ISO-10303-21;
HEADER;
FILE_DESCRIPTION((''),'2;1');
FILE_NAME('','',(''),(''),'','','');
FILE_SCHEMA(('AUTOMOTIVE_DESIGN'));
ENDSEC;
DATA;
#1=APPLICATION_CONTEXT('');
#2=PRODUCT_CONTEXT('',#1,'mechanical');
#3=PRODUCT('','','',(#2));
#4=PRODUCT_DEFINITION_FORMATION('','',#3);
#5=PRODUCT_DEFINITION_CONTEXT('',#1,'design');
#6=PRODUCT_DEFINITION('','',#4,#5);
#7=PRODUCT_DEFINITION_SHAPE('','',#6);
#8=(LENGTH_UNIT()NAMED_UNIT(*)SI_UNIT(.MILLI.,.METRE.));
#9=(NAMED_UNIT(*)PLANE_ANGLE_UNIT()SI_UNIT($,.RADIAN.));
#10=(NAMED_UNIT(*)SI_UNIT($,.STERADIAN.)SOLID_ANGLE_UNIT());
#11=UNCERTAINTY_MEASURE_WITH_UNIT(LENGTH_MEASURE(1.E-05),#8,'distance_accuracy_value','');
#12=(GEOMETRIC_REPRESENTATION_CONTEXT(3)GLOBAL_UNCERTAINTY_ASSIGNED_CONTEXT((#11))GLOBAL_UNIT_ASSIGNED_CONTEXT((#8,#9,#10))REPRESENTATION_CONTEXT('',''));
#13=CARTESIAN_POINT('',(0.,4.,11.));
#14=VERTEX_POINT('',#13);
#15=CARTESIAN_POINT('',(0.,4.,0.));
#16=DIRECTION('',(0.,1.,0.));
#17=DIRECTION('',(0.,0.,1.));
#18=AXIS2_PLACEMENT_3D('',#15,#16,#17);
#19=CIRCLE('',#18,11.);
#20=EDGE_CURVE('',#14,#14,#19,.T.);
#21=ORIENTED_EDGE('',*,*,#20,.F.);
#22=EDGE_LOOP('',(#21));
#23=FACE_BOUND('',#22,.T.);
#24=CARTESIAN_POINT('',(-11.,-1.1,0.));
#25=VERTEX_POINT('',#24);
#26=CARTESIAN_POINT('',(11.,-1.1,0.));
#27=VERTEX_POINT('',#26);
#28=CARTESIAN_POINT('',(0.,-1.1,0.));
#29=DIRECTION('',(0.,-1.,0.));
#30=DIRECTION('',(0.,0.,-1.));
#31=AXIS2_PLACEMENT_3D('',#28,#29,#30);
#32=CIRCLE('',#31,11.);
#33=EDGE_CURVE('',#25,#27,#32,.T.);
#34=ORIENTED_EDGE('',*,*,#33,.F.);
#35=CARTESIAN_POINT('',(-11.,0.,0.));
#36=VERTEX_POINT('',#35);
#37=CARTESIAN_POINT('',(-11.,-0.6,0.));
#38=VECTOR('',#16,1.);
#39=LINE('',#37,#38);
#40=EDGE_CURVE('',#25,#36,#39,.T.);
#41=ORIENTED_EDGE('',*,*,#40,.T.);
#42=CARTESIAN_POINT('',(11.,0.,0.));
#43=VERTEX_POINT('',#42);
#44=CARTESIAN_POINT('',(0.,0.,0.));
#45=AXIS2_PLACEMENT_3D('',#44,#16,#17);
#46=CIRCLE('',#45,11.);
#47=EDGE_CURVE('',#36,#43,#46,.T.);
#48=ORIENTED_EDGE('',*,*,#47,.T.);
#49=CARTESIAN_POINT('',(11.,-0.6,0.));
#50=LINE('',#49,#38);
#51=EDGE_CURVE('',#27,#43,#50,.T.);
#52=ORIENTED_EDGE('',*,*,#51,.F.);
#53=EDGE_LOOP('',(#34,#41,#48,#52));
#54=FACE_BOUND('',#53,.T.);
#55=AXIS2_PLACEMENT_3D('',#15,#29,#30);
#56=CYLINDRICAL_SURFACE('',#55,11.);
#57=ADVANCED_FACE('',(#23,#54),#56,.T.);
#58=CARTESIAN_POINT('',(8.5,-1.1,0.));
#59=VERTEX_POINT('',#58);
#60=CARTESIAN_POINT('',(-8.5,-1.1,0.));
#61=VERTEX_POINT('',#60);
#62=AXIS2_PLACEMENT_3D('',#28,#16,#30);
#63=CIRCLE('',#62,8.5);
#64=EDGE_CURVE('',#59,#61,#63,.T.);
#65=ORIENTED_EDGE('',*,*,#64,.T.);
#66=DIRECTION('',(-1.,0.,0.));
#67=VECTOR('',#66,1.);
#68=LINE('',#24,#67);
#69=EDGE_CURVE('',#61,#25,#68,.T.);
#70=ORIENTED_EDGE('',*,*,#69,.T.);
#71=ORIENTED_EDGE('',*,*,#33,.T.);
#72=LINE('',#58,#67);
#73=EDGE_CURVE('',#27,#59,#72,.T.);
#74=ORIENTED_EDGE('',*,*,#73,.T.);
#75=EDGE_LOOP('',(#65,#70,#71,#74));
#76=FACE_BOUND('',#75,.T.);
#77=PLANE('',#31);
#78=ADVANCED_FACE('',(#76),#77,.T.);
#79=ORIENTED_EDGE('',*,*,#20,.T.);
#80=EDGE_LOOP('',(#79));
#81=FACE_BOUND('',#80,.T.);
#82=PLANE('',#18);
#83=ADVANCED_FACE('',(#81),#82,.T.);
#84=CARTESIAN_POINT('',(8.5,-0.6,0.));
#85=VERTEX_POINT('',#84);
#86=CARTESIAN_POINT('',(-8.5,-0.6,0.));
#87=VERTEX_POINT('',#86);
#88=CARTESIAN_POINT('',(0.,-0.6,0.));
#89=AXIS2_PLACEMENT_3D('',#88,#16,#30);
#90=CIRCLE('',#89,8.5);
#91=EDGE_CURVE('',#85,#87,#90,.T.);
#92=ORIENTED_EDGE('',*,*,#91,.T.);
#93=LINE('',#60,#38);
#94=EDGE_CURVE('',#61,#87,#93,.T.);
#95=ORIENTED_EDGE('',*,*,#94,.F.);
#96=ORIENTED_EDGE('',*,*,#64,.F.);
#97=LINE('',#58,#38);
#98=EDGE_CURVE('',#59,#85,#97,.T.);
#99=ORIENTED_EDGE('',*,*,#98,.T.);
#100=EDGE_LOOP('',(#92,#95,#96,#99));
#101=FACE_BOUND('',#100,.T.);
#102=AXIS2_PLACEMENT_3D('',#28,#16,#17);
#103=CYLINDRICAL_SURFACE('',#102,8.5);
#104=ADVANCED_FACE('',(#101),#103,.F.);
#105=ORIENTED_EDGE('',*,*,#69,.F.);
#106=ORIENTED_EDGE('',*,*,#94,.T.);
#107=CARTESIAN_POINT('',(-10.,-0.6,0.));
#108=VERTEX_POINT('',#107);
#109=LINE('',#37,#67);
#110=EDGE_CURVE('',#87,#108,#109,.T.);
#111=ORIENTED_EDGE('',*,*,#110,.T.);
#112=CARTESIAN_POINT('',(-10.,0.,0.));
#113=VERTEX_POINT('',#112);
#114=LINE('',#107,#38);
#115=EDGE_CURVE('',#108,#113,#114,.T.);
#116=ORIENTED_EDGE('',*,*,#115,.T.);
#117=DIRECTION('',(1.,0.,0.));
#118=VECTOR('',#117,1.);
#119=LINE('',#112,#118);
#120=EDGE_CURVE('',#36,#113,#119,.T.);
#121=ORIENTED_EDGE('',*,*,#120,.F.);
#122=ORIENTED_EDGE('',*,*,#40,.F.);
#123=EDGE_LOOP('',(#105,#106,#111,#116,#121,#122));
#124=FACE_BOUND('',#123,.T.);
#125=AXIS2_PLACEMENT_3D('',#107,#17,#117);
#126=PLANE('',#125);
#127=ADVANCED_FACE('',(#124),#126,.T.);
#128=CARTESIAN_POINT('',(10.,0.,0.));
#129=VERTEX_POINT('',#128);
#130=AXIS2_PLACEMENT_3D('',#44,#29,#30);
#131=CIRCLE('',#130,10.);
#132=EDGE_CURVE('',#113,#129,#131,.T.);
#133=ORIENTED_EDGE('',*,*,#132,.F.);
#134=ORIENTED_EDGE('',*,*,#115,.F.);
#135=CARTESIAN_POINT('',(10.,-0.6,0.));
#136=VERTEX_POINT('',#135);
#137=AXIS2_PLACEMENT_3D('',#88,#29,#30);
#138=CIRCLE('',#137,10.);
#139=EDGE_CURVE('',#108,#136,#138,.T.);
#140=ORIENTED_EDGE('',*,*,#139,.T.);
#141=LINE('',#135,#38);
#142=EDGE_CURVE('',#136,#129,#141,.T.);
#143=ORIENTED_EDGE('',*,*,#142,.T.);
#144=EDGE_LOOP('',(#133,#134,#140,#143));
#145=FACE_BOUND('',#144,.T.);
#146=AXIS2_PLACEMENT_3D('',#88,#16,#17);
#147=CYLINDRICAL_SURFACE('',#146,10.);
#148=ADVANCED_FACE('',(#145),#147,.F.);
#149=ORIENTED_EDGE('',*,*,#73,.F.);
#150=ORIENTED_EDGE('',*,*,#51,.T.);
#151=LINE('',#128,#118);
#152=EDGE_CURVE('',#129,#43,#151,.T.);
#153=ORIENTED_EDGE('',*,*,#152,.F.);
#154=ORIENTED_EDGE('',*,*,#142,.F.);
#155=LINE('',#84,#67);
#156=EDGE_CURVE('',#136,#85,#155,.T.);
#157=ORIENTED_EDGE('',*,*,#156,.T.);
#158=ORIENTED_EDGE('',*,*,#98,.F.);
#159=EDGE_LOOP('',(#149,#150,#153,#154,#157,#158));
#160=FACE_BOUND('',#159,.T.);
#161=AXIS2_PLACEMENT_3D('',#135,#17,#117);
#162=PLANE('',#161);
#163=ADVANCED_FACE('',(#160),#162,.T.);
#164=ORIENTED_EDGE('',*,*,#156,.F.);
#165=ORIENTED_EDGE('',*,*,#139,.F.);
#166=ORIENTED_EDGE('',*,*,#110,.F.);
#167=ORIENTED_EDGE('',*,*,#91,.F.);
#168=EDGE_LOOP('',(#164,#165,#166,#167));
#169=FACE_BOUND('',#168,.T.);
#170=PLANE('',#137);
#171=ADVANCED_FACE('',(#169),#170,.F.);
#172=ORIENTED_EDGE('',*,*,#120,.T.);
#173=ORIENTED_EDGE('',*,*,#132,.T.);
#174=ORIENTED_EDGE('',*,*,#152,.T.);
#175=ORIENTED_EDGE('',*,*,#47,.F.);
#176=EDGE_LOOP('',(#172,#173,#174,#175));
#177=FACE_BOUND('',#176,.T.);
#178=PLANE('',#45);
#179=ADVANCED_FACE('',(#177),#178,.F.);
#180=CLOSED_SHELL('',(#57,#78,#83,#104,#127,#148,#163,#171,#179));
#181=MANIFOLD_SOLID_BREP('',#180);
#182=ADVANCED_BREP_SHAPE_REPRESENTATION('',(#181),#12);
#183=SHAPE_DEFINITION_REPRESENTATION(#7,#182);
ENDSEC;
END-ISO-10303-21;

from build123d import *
from build123d.topology import SkipClean

# Parameters (mm, degrees)
SKETCH2_R           = 11
BOSS_EXTRUDE1_DEPTH = 4
BOSS_EXTRUDE2_START = -0.6
BOSS_EXTRUDE2_DEPTH = 0.6
BOSS_EXTRUDE3_START = 0.5
BOSS_EXTRUDE3_DEPTH = 0.5


with BuildPart() as part:
    # Sketch2 → Boss-Extrude1 (new body)
    with BuildSketch(Plane(origin=(0, 0, 0), x_dir=(1, 0, 0), z_dir=(0, 1, 0))):
        Circle(SKETCH2_R)
    extrude(amount=BOSS_EXTRUDE1_DEPTH)

    # Sketch3 → Boss-Extrude2 (add)
    with SkipClean():  # the faces are left unmerged after this step: merging them gives an invalid solid
        with BuildSketch(Plane(origin=(0, 0, 0), x_dir=(1, 0, 0), z_dir=(0, 1, 0)).offset(BOSS_EXTRUDE2_START)):
            with BuildLine():
                Line((-10, 0), (-11, 0))
                ThreePointArc((-11, 0), (0, 11), (11, 0))
                Line((11, 0), (10, 0))
                ThreePointArc((10, 0), (0, 10), (-10, 0))
            make_face()
        extrude(amount=BOSS_EXTRUDE2_DEPTH)

    # Sketch4 → Boss-Extrude3 (add)
    with SkipClean():  # the faces are left unmerged after this step: merging them gives an invalid solid
        with BuildSketch(Plane.XZ.offset(0.6).offset(BOSS_EXTRUDE3_START)):
            with BuildLine():
                Line((-11, 0), (-8.5, 0))
                ThreePointArc((-8.5, 0), (0, -8.5), (8.5, 0))
                Line((8.5, 0), (11, 0))
                ThreePointArc((11, 0), (0, -11), (-11, 0))
            make_face()
        extrude(amount=-BOSS_EXTRUDE3_DEPTH)


solid = part.part
